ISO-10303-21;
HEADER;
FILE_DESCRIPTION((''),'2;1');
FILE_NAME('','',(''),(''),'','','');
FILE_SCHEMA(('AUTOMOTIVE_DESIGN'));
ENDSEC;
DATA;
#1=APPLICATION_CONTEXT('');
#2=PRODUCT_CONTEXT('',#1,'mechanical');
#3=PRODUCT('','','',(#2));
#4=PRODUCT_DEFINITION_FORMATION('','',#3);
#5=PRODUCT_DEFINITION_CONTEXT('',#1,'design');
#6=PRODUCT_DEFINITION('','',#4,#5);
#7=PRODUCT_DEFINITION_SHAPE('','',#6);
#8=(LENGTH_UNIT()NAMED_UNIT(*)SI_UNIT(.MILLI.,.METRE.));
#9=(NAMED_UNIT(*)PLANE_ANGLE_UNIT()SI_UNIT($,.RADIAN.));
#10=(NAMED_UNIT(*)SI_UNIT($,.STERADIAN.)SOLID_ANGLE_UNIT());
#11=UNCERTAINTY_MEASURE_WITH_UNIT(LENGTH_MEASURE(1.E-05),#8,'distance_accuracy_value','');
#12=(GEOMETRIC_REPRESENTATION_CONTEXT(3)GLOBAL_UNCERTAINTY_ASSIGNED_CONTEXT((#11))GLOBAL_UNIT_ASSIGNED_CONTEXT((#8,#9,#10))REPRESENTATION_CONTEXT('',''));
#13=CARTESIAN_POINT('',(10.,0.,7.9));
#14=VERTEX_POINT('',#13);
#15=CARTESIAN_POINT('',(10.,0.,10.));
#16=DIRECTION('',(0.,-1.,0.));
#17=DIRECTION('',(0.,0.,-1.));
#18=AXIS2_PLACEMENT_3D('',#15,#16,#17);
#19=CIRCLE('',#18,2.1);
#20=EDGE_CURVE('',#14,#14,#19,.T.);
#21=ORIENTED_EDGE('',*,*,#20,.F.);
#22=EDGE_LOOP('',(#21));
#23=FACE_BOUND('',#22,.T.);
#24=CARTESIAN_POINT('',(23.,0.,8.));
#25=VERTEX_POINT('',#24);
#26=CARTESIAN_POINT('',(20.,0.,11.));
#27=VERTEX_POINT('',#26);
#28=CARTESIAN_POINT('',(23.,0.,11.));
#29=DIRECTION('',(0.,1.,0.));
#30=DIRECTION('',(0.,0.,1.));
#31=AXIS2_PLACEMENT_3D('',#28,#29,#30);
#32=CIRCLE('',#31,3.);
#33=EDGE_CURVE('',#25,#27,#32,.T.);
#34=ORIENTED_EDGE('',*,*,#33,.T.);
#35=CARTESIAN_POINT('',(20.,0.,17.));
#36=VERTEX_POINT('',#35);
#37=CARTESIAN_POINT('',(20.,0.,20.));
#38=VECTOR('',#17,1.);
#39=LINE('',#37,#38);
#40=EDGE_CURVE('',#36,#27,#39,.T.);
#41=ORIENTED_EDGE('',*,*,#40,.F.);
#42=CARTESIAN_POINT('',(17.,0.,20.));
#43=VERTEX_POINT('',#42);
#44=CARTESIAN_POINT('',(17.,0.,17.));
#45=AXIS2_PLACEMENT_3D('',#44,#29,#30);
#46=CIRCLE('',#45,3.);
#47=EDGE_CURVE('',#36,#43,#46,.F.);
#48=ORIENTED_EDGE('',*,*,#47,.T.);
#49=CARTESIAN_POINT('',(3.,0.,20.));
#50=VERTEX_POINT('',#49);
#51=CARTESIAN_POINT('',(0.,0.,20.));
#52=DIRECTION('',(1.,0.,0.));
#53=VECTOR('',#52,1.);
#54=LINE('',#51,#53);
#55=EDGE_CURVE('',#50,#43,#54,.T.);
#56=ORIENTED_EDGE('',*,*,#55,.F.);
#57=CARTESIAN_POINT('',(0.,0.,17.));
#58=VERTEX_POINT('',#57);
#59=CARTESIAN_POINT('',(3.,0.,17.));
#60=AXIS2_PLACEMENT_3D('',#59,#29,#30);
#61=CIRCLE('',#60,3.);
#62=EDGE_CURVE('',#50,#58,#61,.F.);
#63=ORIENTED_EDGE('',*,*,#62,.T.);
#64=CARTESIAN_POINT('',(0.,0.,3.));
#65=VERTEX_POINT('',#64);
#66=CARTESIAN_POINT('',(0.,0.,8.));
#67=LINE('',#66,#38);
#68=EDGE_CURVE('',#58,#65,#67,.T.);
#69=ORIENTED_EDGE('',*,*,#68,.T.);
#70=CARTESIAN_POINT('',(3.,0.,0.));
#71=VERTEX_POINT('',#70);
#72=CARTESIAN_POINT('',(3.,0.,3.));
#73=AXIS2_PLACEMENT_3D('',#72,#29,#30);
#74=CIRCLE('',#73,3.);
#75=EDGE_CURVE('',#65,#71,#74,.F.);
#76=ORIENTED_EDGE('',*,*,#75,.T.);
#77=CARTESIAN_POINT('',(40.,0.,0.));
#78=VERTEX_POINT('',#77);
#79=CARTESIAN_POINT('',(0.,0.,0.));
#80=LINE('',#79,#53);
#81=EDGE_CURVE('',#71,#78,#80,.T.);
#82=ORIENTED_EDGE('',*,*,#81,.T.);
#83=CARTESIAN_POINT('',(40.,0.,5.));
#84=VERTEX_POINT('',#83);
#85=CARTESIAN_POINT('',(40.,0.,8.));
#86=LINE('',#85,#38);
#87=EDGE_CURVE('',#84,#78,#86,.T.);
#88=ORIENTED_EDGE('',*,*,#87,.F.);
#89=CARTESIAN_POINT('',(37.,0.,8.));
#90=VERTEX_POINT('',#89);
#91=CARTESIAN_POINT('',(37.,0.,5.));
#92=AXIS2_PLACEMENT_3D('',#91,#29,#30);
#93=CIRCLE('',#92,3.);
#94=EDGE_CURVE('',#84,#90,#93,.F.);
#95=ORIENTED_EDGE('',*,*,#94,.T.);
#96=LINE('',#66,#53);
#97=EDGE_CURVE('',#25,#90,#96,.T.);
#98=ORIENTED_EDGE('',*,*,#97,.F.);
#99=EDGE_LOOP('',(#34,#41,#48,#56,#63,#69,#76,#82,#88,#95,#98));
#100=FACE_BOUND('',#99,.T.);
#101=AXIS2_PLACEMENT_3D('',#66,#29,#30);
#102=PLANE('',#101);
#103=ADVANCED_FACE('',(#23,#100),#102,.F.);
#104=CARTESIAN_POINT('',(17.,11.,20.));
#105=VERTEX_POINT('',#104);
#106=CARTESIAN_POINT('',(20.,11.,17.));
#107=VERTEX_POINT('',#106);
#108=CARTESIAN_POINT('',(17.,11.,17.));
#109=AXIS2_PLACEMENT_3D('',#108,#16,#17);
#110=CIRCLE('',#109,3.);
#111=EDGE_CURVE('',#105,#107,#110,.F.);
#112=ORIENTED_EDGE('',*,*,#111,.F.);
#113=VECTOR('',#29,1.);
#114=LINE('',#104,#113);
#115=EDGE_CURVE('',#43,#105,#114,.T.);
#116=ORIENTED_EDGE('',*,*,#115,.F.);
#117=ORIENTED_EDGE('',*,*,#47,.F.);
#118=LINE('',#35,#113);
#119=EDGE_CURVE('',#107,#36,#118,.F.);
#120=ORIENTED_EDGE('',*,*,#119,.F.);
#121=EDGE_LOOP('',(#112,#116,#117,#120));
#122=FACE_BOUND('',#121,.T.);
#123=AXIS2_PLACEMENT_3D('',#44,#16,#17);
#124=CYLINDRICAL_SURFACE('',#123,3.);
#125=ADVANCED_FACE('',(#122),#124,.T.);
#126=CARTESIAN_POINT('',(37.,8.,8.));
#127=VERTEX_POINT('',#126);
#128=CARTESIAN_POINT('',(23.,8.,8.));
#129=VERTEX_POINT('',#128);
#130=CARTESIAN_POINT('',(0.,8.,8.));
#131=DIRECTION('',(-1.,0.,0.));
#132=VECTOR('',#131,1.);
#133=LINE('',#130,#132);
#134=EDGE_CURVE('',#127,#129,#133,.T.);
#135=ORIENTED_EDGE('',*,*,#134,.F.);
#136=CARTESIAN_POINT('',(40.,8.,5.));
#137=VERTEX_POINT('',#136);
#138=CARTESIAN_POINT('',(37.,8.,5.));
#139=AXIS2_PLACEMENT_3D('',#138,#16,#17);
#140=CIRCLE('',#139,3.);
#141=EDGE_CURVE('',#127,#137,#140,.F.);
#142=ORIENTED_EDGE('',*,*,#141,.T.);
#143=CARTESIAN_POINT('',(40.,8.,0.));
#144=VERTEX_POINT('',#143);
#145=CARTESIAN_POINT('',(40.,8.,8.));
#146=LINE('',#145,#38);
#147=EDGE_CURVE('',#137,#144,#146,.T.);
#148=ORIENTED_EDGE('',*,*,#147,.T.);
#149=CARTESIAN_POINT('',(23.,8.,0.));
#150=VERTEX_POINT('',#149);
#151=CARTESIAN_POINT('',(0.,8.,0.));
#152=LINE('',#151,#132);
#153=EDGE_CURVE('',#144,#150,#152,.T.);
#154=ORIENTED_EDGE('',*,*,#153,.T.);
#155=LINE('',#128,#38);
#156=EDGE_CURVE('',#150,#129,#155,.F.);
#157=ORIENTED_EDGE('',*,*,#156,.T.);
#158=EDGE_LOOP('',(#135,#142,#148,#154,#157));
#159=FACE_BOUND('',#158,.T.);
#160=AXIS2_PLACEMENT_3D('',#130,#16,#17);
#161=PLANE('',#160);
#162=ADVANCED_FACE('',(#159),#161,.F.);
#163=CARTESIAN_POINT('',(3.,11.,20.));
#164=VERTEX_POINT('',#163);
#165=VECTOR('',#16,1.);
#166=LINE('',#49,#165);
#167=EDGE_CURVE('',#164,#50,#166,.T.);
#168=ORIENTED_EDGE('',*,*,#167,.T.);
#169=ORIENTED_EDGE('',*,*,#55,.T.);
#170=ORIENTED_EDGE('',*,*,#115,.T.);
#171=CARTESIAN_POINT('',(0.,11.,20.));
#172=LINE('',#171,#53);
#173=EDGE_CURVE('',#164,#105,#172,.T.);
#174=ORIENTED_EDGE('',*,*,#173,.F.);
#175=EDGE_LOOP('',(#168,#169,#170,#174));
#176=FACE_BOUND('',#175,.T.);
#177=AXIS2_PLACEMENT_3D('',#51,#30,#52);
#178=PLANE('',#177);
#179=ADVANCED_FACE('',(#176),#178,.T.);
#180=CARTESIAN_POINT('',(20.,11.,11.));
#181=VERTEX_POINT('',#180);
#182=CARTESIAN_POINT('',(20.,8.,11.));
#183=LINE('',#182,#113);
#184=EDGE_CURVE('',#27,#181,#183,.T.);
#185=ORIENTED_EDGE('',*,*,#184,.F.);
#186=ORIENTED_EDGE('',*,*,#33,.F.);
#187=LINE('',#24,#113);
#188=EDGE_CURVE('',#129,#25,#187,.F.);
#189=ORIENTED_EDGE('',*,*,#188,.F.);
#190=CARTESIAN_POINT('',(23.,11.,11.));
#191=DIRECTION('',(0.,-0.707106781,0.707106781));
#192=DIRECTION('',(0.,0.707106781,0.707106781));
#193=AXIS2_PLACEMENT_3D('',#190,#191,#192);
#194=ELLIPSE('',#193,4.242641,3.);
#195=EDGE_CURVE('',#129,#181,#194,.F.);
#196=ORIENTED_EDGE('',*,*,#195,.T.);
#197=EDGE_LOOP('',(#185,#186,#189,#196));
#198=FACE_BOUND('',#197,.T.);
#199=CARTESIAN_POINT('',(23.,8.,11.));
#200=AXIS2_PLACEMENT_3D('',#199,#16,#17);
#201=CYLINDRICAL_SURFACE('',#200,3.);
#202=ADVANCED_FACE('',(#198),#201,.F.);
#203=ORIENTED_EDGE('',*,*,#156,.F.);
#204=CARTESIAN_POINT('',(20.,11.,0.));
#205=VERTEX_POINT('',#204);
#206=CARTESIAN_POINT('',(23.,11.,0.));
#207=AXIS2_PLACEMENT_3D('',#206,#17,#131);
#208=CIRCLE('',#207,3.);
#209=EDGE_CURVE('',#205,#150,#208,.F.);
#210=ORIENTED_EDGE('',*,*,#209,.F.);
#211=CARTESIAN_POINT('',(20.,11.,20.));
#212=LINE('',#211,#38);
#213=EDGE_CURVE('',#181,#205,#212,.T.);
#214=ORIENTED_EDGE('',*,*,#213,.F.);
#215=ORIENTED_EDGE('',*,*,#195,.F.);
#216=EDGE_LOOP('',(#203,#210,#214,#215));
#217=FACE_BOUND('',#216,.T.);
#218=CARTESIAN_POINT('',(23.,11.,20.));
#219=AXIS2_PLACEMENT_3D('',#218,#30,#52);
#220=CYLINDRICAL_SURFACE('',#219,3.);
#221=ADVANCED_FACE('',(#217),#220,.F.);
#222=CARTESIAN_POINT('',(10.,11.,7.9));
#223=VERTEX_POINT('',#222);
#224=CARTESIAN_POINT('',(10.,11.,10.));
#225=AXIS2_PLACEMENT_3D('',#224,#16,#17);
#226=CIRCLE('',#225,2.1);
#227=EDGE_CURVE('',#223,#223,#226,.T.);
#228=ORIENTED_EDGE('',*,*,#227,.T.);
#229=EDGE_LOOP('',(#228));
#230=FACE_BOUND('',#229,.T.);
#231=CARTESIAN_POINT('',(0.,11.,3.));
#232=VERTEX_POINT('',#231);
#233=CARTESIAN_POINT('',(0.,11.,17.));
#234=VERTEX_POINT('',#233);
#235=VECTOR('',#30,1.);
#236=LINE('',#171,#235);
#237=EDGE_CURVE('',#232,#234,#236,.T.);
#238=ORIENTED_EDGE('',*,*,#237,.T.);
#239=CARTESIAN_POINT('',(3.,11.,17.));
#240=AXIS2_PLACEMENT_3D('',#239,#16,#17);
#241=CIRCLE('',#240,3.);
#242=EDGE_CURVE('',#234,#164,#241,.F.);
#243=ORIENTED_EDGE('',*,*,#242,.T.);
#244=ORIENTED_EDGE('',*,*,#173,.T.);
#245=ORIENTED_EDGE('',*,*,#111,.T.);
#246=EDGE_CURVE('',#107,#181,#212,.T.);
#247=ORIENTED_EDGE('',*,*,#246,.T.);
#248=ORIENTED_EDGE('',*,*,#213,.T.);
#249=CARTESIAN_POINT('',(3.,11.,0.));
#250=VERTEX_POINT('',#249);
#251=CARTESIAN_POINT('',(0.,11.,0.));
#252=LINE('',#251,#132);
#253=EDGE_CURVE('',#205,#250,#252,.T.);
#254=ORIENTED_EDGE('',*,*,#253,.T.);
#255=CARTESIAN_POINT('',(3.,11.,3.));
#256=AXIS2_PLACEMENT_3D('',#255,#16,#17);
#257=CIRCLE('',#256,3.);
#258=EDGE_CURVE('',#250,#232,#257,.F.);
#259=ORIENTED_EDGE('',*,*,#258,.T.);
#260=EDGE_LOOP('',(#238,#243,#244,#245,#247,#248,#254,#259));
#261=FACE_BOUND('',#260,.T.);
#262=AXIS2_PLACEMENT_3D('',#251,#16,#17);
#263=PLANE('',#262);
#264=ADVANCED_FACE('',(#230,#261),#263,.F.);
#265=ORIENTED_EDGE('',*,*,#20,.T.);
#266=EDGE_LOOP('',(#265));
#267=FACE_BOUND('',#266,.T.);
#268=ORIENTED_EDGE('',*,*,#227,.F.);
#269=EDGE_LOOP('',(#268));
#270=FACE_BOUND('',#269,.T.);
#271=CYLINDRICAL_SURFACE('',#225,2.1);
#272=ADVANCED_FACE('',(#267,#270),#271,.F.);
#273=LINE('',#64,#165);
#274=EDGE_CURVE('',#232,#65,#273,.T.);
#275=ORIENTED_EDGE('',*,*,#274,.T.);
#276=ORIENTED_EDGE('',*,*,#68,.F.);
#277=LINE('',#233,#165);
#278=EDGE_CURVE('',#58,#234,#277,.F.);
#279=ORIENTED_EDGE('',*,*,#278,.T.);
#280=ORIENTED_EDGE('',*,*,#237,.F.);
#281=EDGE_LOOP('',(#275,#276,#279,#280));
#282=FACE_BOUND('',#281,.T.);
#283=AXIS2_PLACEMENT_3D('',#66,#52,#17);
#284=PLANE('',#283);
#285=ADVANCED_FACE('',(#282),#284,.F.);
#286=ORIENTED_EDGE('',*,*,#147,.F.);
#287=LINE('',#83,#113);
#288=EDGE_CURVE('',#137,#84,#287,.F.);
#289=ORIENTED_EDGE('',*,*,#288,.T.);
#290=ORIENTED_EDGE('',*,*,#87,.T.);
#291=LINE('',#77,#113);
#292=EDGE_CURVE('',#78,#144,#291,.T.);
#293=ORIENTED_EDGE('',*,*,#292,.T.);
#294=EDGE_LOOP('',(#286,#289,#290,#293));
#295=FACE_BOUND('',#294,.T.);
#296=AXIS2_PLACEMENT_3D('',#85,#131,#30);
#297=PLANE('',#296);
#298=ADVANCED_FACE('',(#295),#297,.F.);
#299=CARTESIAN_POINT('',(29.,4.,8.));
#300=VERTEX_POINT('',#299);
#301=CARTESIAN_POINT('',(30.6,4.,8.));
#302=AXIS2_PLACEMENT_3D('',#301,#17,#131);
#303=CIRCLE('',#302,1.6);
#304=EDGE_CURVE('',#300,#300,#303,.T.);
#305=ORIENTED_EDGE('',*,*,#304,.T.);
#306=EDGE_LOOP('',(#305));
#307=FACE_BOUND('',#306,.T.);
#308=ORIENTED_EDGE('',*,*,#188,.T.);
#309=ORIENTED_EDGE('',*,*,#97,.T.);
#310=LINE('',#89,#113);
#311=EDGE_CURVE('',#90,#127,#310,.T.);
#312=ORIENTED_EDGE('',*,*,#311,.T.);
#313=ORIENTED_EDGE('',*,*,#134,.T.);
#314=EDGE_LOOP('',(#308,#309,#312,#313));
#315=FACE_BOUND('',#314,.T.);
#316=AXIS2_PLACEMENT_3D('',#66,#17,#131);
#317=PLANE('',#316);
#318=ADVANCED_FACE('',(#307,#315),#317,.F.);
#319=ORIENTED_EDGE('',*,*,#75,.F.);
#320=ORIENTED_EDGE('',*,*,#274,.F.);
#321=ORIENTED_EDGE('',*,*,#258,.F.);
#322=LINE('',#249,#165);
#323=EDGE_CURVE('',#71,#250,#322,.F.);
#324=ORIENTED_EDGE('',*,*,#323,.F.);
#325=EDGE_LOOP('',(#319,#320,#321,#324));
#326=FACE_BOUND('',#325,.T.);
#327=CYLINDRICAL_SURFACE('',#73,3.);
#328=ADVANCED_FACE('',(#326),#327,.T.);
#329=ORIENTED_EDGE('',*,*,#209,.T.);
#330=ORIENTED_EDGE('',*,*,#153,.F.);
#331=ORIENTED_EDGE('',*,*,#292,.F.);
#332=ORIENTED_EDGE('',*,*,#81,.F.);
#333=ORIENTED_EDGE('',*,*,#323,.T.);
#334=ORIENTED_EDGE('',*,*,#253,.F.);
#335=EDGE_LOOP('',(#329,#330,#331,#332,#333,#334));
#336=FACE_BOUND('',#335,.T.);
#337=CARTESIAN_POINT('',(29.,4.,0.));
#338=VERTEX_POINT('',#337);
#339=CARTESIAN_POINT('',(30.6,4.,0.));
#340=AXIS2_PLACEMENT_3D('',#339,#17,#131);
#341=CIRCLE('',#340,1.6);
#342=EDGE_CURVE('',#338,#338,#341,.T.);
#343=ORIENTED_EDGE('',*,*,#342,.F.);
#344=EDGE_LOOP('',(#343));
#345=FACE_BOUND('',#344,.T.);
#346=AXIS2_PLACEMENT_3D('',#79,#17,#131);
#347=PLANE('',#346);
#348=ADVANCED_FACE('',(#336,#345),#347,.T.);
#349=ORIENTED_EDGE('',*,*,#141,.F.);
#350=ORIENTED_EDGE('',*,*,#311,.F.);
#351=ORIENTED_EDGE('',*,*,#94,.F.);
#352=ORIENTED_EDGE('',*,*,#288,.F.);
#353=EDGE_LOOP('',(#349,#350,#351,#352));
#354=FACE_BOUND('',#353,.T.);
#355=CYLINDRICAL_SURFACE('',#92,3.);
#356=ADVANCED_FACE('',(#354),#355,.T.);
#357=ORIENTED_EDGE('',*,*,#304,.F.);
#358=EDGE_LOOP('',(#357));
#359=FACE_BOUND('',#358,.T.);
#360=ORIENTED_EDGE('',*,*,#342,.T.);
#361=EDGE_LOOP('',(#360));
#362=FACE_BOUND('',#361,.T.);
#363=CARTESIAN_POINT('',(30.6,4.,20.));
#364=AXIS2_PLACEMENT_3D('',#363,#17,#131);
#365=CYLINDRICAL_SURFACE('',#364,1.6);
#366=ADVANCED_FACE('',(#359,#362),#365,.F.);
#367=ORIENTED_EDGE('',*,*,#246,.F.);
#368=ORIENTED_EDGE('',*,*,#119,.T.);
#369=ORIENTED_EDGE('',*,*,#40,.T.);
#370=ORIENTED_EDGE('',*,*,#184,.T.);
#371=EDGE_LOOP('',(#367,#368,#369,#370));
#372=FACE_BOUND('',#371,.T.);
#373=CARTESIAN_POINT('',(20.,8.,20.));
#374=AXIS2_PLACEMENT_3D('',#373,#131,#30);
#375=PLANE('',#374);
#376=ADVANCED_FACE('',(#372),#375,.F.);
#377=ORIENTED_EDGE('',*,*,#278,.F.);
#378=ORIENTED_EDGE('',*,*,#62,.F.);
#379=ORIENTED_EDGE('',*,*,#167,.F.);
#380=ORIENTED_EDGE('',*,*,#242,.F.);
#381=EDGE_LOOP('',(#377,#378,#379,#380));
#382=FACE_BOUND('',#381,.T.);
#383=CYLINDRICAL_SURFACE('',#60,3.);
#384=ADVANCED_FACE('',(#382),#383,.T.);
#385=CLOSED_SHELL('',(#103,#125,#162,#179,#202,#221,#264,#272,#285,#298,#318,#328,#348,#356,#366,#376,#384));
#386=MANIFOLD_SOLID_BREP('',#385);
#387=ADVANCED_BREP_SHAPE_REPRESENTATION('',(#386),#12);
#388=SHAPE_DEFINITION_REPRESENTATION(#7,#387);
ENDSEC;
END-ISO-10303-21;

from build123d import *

# Parameters (mm, degrees)
ESQUISSE1_W             = 40
ESQUISSE1_H             = 8
BOSS_EXTRU_1_DEPTH      = 8
ESQUISSE2_W             = 20
ESQUISSE2_H             = 8
BOSS_EXTRU_2_DEPTH      = 12
ESQUISSE3_W             = 20
ESQUISSE3_H             = 20
BOSS_EXTRU_3_DEPTH      = 3
CONG_1_R                = 3
ESQUISSE4_R             = 1.6
ENL_V_MAT_EXTRU_1_DEPTH = 47.054315759
ESQUISSE5_R             = 2.1
ENL_V_MAT_EXTRU_2_DEPTH = 47.054315759


with BuildPart() as part:
    # Esquisse1 → Boss.-Extru.1 (new body)
    with BuildSketch(Plane.XY):
        with Locations((20, 4)):
            Rectangle(ESQUISSE1_W, ESQUISSE1_H)
    extrude(amount=BOSS_EXTRU_1_DEPTH)

    # Esquisse2 → Boss.-Extru.2 (add)
    with BuildSketch(Plane.XY.offset(8)):
        with Locations((10, 4)):
            Rectangle(ESQUISSE2_W, ESQUISSE2_H)
    extrude(amount=BOSS_EXTRU_2_DEPTH)

    # Esquisse3 → Boss.-Extru.3 (add)
    with BuildSketch(Plane(origin=(0, 8, 0), x_dir=(1, 0, 0), z_dir=(0, 1, 0))):
        with Locations((10, -10)):
            Rectangle(ESQUISSE3_W, ESQUISSE3_H)
    extrude(amount=BOSS_EXTRU_3_DEPTH)

    # Congé1
    cong_1_edges = [part.edges().sort_by_distance(p)[0] for p in [
        (20, 5.5, 20),
        (40, 4, 8),
        (0, 5.5, 0),
        (0, 5.5, 20),
        (20, 4, 8),
        (20, 8, 4),
    ]]
    fillet(cong_1_edges, radius=CONG_1_R - 0.0001)  # a hair under: the kernel refuses the full size

    # Esquisse4 → Enlèv. mat.-Extru.1 (cut, through all)
    with BuildSketch(Plane(origin=(0, 0, 0), x_dir=(-1, 0, 0), z_dir=(0, 0, -1))):
        with Locations((-30.6, 4)):
            Circle(ESQUISSE4_R)
    extrude(amount=-ENL_V_MAT_EXTRU_1_DEPTH, mode=Mode.SUBTRACT)

    # Esquisse5 → Enlèv. mat.-Extru.2 (cut, through all)
    with BuildSketch(Plane.XZ):
        with Locations(Location((10, 10, 0), (0, 0, 270))):
            Circle(ESQUISSE5_R)
    extrude(amount=-ENL_V_MAT_EXTRU_2_DEPTH, mode=Mode.SUBTRACT)


solid = part.part
